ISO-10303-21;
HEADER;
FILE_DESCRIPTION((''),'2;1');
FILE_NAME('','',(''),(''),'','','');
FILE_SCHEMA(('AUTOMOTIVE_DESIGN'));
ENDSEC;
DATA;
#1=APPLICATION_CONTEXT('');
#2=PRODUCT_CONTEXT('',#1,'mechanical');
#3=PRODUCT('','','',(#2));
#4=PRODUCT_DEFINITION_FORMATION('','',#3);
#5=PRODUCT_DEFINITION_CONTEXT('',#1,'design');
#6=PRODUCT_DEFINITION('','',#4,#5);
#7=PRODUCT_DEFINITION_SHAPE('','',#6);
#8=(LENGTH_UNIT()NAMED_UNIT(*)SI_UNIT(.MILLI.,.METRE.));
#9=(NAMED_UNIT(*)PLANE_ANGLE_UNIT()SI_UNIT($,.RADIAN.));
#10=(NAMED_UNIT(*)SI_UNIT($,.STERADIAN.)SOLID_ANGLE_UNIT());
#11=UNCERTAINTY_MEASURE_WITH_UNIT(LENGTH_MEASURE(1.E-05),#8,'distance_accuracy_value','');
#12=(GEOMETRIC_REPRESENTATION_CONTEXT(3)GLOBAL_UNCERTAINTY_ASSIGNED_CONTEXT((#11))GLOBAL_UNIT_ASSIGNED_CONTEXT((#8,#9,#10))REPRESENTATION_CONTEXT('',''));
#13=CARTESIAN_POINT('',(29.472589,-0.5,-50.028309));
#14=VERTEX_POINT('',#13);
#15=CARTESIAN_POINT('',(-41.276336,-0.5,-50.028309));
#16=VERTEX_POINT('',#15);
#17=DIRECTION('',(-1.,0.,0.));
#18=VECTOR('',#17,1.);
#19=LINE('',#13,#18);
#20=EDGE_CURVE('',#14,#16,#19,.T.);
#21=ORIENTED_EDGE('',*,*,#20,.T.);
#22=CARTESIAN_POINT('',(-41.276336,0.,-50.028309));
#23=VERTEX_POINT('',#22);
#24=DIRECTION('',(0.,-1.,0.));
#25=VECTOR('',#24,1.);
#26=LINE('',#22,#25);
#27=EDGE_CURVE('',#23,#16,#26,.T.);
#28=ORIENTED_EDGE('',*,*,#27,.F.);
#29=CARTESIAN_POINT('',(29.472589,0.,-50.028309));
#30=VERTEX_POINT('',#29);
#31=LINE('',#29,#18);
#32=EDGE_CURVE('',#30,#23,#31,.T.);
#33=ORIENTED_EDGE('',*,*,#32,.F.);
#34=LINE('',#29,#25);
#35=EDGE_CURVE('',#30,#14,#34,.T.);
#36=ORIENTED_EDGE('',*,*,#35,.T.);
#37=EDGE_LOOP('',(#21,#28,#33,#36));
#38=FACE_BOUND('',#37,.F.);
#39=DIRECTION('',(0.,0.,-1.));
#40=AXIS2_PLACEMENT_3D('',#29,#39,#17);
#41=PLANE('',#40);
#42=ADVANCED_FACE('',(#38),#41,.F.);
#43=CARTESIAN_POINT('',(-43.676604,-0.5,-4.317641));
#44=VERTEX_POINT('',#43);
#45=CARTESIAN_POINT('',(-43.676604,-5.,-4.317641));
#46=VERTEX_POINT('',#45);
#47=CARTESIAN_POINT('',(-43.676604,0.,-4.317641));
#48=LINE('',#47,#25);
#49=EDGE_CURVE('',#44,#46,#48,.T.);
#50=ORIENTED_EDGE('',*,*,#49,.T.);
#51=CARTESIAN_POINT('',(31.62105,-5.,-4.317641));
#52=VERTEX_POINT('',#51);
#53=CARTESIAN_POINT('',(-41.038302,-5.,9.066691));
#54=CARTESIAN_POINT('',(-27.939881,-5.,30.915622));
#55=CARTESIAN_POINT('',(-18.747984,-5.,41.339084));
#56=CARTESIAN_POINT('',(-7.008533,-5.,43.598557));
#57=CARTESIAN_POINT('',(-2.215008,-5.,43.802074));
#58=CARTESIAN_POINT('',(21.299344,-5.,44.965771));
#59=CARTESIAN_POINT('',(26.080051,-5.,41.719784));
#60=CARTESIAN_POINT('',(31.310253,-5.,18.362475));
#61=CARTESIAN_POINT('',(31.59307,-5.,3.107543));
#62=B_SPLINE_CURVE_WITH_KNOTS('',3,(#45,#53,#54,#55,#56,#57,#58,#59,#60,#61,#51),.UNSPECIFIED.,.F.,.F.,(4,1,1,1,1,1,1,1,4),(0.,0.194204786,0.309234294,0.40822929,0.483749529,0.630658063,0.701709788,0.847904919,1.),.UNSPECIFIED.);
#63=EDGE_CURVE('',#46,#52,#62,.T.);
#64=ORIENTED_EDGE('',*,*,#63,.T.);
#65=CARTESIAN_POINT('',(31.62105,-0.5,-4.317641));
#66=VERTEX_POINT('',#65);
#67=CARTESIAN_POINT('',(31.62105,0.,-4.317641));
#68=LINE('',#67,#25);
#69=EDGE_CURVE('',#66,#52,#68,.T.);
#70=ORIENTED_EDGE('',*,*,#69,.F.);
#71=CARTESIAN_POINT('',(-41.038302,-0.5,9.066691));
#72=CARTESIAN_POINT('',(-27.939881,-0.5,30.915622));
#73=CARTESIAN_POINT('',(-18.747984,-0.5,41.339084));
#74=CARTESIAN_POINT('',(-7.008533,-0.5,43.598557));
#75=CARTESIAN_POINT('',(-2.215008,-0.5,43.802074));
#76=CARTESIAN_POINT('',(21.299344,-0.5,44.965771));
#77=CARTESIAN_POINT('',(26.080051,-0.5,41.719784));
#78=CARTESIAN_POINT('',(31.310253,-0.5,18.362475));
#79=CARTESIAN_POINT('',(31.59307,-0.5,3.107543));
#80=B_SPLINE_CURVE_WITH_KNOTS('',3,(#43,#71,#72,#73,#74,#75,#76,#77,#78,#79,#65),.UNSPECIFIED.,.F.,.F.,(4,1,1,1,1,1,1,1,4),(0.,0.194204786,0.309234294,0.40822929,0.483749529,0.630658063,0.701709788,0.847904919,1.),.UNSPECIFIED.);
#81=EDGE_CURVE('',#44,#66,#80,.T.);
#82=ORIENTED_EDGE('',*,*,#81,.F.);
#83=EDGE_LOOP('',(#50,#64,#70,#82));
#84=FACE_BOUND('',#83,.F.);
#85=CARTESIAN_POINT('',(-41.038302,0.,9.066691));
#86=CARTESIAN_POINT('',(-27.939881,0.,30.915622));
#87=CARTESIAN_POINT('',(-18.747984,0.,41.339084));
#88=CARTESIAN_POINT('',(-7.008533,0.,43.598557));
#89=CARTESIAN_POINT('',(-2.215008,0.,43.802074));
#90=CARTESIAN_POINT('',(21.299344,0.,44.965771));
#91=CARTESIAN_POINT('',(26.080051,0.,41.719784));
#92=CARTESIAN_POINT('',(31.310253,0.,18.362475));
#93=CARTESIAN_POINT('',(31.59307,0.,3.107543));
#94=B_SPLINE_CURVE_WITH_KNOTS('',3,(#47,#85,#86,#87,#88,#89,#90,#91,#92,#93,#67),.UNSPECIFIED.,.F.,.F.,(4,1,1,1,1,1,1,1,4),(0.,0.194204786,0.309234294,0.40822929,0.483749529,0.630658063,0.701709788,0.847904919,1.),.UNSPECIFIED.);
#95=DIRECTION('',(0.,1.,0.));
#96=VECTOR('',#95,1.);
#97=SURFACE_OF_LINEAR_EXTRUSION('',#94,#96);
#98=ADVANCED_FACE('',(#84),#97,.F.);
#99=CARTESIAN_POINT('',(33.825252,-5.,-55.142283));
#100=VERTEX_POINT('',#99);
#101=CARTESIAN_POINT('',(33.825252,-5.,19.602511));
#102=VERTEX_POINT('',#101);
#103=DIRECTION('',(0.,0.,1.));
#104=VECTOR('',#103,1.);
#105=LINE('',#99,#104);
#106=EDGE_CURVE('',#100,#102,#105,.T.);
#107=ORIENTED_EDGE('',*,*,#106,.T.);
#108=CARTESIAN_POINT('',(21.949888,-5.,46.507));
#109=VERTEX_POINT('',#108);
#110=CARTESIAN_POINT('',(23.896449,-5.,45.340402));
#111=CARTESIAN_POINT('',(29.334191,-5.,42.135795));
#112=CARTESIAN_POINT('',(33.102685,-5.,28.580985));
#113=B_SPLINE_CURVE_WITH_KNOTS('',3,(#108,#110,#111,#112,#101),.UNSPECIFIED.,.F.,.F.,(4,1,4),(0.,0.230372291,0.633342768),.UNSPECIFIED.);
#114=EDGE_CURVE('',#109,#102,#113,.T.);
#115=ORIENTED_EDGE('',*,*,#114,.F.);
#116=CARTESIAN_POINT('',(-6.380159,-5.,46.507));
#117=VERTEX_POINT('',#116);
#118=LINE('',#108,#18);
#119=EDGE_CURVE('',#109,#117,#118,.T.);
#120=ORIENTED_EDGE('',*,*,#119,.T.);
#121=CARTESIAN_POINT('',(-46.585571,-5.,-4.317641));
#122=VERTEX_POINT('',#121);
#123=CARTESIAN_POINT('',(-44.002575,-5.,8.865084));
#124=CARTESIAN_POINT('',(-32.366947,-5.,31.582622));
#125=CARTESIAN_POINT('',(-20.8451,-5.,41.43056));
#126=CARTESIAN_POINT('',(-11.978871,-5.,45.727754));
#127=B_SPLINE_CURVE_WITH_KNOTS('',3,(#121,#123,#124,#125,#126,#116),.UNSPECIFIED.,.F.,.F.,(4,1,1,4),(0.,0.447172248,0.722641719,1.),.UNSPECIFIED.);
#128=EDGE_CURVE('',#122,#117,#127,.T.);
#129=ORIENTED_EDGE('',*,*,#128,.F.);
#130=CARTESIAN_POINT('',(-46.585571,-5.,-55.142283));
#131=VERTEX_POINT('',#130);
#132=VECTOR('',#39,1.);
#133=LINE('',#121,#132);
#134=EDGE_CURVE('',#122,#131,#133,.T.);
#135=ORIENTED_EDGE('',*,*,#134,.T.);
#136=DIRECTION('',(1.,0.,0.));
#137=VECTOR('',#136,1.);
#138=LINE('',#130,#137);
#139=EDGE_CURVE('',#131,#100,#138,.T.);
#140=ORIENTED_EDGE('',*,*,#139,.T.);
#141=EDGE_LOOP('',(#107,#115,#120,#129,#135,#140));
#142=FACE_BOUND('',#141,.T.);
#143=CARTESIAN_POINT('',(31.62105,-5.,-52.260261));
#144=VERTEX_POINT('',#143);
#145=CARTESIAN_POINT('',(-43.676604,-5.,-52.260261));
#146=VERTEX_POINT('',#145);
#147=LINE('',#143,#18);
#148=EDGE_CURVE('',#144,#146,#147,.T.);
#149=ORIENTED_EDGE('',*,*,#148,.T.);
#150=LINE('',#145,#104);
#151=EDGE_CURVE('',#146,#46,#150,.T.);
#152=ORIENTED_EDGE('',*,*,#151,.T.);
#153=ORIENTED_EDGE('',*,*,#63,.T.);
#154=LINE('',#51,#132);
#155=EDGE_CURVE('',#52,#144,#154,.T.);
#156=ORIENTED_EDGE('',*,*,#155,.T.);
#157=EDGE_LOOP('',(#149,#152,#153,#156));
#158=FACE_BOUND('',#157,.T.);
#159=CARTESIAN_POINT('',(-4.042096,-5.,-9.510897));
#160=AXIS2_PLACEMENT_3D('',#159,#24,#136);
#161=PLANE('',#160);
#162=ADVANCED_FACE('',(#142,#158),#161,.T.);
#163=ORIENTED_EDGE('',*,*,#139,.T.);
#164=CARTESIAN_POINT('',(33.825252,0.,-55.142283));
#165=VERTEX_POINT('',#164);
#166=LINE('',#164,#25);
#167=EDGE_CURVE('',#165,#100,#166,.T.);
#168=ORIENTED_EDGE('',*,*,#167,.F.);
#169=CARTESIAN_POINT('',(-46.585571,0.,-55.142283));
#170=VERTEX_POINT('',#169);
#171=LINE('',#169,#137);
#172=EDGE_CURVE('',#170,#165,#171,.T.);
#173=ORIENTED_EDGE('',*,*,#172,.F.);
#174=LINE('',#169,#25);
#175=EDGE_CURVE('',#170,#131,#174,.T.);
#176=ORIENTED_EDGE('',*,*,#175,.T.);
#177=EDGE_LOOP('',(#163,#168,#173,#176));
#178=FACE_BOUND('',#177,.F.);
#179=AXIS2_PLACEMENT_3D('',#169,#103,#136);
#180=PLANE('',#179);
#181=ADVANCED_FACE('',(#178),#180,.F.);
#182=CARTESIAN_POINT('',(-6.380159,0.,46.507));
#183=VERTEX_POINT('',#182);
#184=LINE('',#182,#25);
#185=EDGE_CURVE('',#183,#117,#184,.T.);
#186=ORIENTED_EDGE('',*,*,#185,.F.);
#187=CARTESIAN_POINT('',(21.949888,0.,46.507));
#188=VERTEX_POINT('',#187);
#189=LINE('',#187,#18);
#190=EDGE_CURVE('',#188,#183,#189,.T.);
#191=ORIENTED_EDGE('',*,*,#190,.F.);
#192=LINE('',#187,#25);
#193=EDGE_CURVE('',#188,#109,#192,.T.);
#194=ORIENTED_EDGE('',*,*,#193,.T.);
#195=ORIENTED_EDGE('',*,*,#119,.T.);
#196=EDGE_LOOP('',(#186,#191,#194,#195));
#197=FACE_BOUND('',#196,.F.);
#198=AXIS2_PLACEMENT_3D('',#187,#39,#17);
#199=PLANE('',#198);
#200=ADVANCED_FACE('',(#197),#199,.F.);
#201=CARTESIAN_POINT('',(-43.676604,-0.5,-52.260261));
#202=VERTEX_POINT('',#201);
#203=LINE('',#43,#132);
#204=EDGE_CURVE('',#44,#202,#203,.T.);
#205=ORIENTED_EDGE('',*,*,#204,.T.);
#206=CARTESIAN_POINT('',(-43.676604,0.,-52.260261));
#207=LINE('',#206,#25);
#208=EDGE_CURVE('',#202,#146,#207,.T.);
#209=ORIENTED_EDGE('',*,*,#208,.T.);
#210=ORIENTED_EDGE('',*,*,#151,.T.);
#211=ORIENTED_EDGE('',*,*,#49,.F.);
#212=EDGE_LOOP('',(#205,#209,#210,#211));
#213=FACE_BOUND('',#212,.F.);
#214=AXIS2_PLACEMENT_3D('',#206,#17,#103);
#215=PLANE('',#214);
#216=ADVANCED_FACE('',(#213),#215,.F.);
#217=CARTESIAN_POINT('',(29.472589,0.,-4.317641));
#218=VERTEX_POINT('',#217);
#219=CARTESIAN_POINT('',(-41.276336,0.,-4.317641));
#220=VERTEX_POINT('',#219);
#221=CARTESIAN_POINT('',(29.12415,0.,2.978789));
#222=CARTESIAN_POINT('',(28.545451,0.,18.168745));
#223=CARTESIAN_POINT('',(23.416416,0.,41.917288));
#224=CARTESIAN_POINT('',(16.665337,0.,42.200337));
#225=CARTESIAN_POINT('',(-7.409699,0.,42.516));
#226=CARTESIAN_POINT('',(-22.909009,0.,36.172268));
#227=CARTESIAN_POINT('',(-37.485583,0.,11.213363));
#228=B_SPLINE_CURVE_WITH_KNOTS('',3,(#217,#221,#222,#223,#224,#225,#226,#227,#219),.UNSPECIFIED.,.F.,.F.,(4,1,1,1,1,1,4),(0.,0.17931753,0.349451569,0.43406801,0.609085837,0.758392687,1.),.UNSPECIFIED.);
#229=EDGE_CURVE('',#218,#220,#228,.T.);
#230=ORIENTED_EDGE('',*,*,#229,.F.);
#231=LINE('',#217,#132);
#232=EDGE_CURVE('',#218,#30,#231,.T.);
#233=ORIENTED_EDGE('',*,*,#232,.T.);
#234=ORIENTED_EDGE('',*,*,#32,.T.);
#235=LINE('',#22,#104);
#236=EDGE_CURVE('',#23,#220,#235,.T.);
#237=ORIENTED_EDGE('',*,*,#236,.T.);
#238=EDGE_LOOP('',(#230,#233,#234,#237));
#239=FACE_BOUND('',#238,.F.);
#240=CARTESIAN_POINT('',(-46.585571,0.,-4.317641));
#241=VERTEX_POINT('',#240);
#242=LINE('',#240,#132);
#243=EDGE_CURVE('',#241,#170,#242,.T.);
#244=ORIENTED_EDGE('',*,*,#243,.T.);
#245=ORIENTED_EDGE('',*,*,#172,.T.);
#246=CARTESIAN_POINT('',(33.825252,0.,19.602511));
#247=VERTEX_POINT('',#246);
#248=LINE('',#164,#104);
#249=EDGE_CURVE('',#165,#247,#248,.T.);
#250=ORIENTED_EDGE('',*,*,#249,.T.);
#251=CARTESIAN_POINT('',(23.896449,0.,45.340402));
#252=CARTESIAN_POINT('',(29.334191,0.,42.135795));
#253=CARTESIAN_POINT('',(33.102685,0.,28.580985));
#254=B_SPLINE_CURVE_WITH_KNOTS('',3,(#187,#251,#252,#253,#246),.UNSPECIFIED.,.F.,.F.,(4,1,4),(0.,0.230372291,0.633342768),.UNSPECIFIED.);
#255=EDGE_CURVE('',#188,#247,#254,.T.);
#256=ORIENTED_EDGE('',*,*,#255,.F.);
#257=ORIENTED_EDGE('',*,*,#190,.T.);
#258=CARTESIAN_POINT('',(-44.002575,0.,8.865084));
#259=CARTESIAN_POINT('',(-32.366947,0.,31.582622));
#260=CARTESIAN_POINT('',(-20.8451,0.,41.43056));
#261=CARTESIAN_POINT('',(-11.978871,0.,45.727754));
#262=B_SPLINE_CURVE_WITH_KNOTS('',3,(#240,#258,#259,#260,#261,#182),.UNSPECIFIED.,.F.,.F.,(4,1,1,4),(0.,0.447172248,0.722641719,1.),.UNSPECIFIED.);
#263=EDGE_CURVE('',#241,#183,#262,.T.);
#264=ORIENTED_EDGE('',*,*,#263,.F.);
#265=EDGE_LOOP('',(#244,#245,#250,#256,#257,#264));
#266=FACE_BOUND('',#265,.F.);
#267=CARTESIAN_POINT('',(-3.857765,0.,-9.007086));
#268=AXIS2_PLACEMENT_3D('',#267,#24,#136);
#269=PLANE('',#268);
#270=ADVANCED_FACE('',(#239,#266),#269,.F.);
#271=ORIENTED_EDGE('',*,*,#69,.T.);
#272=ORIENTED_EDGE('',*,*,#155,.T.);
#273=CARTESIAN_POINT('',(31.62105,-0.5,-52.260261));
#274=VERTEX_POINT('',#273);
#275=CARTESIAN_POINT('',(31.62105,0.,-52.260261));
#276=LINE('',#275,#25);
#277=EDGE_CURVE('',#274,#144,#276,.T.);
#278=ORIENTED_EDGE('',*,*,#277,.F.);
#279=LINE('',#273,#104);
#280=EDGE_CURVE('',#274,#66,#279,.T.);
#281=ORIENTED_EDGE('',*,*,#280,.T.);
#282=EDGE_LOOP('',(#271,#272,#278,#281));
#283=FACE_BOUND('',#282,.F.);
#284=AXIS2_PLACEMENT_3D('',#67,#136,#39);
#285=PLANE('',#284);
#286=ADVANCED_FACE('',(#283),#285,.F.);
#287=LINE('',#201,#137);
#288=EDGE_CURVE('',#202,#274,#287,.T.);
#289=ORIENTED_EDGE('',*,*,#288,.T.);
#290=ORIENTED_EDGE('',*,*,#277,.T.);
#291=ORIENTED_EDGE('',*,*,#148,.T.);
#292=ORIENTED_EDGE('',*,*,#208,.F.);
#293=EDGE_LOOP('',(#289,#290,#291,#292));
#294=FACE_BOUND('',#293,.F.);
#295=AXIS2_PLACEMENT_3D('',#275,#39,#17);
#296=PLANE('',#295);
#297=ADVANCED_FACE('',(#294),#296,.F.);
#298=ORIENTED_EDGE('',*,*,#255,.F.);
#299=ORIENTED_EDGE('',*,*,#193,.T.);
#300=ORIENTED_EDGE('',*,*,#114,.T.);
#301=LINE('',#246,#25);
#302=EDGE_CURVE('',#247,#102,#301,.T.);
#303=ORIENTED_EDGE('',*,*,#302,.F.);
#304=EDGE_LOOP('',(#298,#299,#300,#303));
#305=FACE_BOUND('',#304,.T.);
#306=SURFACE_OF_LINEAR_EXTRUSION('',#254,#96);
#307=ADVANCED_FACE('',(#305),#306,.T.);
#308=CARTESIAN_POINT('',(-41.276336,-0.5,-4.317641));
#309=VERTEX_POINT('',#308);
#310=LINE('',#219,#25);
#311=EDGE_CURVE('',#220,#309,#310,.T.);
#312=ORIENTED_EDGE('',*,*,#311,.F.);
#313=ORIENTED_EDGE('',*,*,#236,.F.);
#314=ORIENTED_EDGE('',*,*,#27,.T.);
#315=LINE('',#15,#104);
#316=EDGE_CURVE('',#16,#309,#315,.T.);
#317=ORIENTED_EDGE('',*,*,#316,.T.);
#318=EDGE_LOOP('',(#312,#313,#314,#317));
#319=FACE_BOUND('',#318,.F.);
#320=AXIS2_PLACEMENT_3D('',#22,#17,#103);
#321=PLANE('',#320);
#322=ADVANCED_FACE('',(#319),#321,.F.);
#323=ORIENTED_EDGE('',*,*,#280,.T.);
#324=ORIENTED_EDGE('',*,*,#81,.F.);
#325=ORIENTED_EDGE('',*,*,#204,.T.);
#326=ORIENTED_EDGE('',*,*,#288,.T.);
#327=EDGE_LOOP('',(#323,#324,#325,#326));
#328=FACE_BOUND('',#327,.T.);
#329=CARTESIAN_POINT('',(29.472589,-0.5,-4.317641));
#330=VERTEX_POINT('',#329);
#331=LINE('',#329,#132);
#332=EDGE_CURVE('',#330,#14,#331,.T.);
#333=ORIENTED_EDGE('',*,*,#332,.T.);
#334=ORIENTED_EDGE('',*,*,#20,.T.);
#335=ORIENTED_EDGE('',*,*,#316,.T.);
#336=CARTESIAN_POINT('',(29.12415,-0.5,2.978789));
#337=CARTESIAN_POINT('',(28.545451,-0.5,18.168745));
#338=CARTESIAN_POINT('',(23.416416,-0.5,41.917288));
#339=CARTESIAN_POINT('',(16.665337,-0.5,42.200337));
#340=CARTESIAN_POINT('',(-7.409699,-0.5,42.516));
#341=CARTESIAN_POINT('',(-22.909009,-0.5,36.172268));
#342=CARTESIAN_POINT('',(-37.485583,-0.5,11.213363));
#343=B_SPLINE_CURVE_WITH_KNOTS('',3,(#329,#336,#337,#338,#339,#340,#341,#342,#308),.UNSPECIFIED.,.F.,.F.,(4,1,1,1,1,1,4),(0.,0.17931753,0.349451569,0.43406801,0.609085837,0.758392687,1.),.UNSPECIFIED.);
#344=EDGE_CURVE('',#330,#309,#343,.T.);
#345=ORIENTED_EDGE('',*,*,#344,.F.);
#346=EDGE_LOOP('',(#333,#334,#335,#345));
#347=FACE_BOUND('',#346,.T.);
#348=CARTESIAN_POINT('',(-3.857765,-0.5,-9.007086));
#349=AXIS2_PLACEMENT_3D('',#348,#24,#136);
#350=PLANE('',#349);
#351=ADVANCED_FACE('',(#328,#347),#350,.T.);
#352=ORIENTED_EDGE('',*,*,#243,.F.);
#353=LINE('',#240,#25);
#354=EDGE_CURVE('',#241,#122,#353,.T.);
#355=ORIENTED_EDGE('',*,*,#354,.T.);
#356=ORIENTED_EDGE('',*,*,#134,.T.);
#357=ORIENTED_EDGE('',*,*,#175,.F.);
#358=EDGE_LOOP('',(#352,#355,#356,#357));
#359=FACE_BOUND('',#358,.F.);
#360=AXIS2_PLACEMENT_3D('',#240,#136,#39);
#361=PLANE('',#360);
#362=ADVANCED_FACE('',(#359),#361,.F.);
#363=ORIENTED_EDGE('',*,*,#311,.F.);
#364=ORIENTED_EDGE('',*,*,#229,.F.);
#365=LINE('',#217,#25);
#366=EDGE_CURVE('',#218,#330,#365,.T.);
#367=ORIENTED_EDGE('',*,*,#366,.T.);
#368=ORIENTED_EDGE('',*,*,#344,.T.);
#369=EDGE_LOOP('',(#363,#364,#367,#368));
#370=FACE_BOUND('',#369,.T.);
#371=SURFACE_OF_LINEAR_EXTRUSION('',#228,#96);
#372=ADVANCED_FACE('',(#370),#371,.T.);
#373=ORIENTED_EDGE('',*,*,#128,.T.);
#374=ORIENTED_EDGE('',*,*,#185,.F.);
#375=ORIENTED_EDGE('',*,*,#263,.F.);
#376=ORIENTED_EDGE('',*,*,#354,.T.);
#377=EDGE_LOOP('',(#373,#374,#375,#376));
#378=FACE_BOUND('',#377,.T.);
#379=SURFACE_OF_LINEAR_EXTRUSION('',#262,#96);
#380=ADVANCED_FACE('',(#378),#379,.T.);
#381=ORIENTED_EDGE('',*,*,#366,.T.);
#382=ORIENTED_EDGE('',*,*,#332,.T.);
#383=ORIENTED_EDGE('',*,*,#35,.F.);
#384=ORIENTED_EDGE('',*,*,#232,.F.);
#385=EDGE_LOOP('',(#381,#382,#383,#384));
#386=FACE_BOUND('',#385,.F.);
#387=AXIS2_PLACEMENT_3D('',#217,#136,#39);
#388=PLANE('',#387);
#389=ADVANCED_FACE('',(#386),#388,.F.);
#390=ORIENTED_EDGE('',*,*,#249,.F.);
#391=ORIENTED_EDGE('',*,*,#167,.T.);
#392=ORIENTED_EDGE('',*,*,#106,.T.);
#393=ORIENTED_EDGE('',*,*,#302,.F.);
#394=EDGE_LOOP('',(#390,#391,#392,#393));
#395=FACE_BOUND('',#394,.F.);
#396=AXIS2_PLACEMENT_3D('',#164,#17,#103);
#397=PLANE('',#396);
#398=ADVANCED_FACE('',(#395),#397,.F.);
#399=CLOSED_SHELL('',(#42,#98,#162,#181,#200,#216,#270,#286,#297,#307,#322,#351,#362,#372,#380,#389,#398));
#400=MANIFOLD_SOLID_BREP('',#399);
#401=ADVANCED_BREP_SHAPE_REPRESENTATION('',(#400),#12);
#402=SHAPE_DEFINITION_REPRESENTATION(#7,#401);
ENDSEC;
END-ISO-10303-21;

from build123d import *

# Parameters (mm, degrees)
F1_DEPTH = 5
F2_DEPTH = 0.5


with BuildPart() as f1:
    # F0 (on Front) → F1 (new body)
    with BuildSketch(Plane.XZ):
        with BuildLine():
            Line((21.9498877709, 46.5069999899), (-6.3801594079, 46.5069999899))
            add(Edge.make_bspline(
                [(-46.5855710208, -4.3176412582), (-44.0025745855, 8.8650835819), (-32.3669471438, 31.5826223404), (-20.8450996019, 41.430559805), (-11.9788710798, 45.7277535437), (-6.3801594079, 46.5069999899)],
                knots=[0, 0, 0, 0, 0.4471722481, 0.7226417186, 1, 1, 1, 1], degree=3))
            Line((-46.5855710208, -4.3176412582), (-46.5855710208, -55.1422825063))
            Line((-46.5855710208, -55.1422825063), (33.8252522051, -55.1422825063))
            Line((33.8252522051, -55.1422825063), (33.8252522051, 3.3716567512))
            add(Edge.make_bspline(
                [(33.8252522051, 3.4864664458), (33.8224510146, 3.4189701607), (33.823496077, 3.4012213221), (33.8252522051, 3.3716567512)],
                knots=[0.9714616128, 0.9714616128, 0.9714616128, 0.9714616128, 1, 1, 1, 1], degree=3))
            Line((33.8252522051, 3.4864664458), (33.8252522051, 19.6025110781))
            add(Edge.make_bspline(
                [(21.9498877709, 46.5069999899), (23.8964492564, 45.3404017708), (29.3341911452, 42.1357952335), (33.1026848595, 28.5809846581), (33.8252522051, 19.6025110781)],
                knots=[0, 0, 0, 0, 0.2303722913, 0.6333427683, 0.6333427683, 0.6333427683, 0.6333427683], degree=3))
        make_face()
        with BuildLine():
            Line((31.6210500896, -52.260261029), (-43.6766035855, -52.260261029))
            Line((-43.6766035855, -52.260261029), (-43.6766035855, -4.3176412582))
            add(Edge.make_bspline(
                [(-43.6766035855, -4.3176412582), (-41.0383021138, 9.0666906176), (-27.9398807539, 30.9156219348), (-18.7479844266, 41.3390835094), (-7.0085331076, 43.5985571671), (-2.215007715, 43.8020735184), (21.2993443911, 44.9657713637), (26.0800513958, 41.7197839808), (31.3102526714, 18.3624746495), (31.5930695379, 3.1075431018), (31.6210500896, -4.3176412582)],
                knots=[0, 0, 0, 0, 0.1942047864, 0.3092342936, 0.40822929, 0.4837495286, 0.6306580628, 0.7017097882, 0.8479049191, 1, 1, 1, 1], degree=3))
            Line((31.6210500896, -4.3176412582), (31.6210500896, -52.260261029))
        make_face(mode=Mode.SUBTRACT)
        with BuildLine():
            Line((33.8252522051, 3.3716567512), (33.8252522051, 3.4864664458))
            add(Edge.make_bspline(
                [(33.8252522051, 3.4864664458), (33.8224510146, 3.4189701607), (33.823496077, 3.4012213221), (33.8252522051, 3.3716567512)],
                knots=[0.9714616128, 0.9714616128, 0.9714616128, 0.9714616128, 1, 1, 1, 1], degree=3))
        make_face()
    extrude(amount=F1_DEPTH)

    # F0 (on Front) → F2 (join)
    with BuildSketch(Plane.XZ):
        with BuildLine():
            Line((-43.6766035855, -4.3176412582), (-43.6766035855, -52.260261029))
            Line((-43.6766035855, -52.260261029), (31.6210500896, -52.260261029))
            Line((31.6210500896, -52.260261029), (31.6210500896, -4.3176412582))
            add(Edge.make_bspline(
                [(-43.6766035855, -4.3176412582), (-41.0383021138, 9.0666906176), (-27.9398807539, 30.9156219348), (-18.7479844266, 41.3390835094), (-7.0085331076, 43.5985571671), (-2.215007715, 43.8020735184), (21.2993443911, 44.9657713637), (26.0800513958, 41.7197839808), (31.3102526714, 18.3624746495), (31.5930695379, 3.1075431018), (31.6210500896, -4.3176412582)],
                knots=[0, 0, 0, 0, 0.1942047864, 0.3092342936, 0.40822929, 0.4837495286, 0.6306580628, 0.7017097882, 0.8479049191, 1, 1, 1, 1], degree=3))
        make_face()
        with BuildLine():
            Line((29.4725894928, -50.028309226), (-41.2763357162, -50.028309226))
            Line((-41.2763357162, -50.028309226), (-41.2763357162, -4.3176412582))
            add(Edge.make_bspline(
                [(29.4725894928, -4.3176412582), (29.1241496967, 2.9787885737), (28.5454511929, 18.1687452905), (23.4164160844, 41.9172876242), (16.665337298, 42.2003372333), (-7.4096989865, 42.5160002908), (-22.9090094529, 36.1722681351), (-37.4855825891, 11.2133633357), (-41.2763357162, -4.3176412582)],
                knots=[0, 0, 0, 0, 0.1793175303, 0.3494515687, 0.4340680096, 0.6090858367, 0.7583926872, 1, 1, 1, 1], degree=3))
            Line((29.4725894928, -4.3176412582), (29.4725894928, -50.028309226))
        make_face(mode=Mode.SUBTRACT)
    extrude(amount=F2_DEPTH)


solid = f1.part
